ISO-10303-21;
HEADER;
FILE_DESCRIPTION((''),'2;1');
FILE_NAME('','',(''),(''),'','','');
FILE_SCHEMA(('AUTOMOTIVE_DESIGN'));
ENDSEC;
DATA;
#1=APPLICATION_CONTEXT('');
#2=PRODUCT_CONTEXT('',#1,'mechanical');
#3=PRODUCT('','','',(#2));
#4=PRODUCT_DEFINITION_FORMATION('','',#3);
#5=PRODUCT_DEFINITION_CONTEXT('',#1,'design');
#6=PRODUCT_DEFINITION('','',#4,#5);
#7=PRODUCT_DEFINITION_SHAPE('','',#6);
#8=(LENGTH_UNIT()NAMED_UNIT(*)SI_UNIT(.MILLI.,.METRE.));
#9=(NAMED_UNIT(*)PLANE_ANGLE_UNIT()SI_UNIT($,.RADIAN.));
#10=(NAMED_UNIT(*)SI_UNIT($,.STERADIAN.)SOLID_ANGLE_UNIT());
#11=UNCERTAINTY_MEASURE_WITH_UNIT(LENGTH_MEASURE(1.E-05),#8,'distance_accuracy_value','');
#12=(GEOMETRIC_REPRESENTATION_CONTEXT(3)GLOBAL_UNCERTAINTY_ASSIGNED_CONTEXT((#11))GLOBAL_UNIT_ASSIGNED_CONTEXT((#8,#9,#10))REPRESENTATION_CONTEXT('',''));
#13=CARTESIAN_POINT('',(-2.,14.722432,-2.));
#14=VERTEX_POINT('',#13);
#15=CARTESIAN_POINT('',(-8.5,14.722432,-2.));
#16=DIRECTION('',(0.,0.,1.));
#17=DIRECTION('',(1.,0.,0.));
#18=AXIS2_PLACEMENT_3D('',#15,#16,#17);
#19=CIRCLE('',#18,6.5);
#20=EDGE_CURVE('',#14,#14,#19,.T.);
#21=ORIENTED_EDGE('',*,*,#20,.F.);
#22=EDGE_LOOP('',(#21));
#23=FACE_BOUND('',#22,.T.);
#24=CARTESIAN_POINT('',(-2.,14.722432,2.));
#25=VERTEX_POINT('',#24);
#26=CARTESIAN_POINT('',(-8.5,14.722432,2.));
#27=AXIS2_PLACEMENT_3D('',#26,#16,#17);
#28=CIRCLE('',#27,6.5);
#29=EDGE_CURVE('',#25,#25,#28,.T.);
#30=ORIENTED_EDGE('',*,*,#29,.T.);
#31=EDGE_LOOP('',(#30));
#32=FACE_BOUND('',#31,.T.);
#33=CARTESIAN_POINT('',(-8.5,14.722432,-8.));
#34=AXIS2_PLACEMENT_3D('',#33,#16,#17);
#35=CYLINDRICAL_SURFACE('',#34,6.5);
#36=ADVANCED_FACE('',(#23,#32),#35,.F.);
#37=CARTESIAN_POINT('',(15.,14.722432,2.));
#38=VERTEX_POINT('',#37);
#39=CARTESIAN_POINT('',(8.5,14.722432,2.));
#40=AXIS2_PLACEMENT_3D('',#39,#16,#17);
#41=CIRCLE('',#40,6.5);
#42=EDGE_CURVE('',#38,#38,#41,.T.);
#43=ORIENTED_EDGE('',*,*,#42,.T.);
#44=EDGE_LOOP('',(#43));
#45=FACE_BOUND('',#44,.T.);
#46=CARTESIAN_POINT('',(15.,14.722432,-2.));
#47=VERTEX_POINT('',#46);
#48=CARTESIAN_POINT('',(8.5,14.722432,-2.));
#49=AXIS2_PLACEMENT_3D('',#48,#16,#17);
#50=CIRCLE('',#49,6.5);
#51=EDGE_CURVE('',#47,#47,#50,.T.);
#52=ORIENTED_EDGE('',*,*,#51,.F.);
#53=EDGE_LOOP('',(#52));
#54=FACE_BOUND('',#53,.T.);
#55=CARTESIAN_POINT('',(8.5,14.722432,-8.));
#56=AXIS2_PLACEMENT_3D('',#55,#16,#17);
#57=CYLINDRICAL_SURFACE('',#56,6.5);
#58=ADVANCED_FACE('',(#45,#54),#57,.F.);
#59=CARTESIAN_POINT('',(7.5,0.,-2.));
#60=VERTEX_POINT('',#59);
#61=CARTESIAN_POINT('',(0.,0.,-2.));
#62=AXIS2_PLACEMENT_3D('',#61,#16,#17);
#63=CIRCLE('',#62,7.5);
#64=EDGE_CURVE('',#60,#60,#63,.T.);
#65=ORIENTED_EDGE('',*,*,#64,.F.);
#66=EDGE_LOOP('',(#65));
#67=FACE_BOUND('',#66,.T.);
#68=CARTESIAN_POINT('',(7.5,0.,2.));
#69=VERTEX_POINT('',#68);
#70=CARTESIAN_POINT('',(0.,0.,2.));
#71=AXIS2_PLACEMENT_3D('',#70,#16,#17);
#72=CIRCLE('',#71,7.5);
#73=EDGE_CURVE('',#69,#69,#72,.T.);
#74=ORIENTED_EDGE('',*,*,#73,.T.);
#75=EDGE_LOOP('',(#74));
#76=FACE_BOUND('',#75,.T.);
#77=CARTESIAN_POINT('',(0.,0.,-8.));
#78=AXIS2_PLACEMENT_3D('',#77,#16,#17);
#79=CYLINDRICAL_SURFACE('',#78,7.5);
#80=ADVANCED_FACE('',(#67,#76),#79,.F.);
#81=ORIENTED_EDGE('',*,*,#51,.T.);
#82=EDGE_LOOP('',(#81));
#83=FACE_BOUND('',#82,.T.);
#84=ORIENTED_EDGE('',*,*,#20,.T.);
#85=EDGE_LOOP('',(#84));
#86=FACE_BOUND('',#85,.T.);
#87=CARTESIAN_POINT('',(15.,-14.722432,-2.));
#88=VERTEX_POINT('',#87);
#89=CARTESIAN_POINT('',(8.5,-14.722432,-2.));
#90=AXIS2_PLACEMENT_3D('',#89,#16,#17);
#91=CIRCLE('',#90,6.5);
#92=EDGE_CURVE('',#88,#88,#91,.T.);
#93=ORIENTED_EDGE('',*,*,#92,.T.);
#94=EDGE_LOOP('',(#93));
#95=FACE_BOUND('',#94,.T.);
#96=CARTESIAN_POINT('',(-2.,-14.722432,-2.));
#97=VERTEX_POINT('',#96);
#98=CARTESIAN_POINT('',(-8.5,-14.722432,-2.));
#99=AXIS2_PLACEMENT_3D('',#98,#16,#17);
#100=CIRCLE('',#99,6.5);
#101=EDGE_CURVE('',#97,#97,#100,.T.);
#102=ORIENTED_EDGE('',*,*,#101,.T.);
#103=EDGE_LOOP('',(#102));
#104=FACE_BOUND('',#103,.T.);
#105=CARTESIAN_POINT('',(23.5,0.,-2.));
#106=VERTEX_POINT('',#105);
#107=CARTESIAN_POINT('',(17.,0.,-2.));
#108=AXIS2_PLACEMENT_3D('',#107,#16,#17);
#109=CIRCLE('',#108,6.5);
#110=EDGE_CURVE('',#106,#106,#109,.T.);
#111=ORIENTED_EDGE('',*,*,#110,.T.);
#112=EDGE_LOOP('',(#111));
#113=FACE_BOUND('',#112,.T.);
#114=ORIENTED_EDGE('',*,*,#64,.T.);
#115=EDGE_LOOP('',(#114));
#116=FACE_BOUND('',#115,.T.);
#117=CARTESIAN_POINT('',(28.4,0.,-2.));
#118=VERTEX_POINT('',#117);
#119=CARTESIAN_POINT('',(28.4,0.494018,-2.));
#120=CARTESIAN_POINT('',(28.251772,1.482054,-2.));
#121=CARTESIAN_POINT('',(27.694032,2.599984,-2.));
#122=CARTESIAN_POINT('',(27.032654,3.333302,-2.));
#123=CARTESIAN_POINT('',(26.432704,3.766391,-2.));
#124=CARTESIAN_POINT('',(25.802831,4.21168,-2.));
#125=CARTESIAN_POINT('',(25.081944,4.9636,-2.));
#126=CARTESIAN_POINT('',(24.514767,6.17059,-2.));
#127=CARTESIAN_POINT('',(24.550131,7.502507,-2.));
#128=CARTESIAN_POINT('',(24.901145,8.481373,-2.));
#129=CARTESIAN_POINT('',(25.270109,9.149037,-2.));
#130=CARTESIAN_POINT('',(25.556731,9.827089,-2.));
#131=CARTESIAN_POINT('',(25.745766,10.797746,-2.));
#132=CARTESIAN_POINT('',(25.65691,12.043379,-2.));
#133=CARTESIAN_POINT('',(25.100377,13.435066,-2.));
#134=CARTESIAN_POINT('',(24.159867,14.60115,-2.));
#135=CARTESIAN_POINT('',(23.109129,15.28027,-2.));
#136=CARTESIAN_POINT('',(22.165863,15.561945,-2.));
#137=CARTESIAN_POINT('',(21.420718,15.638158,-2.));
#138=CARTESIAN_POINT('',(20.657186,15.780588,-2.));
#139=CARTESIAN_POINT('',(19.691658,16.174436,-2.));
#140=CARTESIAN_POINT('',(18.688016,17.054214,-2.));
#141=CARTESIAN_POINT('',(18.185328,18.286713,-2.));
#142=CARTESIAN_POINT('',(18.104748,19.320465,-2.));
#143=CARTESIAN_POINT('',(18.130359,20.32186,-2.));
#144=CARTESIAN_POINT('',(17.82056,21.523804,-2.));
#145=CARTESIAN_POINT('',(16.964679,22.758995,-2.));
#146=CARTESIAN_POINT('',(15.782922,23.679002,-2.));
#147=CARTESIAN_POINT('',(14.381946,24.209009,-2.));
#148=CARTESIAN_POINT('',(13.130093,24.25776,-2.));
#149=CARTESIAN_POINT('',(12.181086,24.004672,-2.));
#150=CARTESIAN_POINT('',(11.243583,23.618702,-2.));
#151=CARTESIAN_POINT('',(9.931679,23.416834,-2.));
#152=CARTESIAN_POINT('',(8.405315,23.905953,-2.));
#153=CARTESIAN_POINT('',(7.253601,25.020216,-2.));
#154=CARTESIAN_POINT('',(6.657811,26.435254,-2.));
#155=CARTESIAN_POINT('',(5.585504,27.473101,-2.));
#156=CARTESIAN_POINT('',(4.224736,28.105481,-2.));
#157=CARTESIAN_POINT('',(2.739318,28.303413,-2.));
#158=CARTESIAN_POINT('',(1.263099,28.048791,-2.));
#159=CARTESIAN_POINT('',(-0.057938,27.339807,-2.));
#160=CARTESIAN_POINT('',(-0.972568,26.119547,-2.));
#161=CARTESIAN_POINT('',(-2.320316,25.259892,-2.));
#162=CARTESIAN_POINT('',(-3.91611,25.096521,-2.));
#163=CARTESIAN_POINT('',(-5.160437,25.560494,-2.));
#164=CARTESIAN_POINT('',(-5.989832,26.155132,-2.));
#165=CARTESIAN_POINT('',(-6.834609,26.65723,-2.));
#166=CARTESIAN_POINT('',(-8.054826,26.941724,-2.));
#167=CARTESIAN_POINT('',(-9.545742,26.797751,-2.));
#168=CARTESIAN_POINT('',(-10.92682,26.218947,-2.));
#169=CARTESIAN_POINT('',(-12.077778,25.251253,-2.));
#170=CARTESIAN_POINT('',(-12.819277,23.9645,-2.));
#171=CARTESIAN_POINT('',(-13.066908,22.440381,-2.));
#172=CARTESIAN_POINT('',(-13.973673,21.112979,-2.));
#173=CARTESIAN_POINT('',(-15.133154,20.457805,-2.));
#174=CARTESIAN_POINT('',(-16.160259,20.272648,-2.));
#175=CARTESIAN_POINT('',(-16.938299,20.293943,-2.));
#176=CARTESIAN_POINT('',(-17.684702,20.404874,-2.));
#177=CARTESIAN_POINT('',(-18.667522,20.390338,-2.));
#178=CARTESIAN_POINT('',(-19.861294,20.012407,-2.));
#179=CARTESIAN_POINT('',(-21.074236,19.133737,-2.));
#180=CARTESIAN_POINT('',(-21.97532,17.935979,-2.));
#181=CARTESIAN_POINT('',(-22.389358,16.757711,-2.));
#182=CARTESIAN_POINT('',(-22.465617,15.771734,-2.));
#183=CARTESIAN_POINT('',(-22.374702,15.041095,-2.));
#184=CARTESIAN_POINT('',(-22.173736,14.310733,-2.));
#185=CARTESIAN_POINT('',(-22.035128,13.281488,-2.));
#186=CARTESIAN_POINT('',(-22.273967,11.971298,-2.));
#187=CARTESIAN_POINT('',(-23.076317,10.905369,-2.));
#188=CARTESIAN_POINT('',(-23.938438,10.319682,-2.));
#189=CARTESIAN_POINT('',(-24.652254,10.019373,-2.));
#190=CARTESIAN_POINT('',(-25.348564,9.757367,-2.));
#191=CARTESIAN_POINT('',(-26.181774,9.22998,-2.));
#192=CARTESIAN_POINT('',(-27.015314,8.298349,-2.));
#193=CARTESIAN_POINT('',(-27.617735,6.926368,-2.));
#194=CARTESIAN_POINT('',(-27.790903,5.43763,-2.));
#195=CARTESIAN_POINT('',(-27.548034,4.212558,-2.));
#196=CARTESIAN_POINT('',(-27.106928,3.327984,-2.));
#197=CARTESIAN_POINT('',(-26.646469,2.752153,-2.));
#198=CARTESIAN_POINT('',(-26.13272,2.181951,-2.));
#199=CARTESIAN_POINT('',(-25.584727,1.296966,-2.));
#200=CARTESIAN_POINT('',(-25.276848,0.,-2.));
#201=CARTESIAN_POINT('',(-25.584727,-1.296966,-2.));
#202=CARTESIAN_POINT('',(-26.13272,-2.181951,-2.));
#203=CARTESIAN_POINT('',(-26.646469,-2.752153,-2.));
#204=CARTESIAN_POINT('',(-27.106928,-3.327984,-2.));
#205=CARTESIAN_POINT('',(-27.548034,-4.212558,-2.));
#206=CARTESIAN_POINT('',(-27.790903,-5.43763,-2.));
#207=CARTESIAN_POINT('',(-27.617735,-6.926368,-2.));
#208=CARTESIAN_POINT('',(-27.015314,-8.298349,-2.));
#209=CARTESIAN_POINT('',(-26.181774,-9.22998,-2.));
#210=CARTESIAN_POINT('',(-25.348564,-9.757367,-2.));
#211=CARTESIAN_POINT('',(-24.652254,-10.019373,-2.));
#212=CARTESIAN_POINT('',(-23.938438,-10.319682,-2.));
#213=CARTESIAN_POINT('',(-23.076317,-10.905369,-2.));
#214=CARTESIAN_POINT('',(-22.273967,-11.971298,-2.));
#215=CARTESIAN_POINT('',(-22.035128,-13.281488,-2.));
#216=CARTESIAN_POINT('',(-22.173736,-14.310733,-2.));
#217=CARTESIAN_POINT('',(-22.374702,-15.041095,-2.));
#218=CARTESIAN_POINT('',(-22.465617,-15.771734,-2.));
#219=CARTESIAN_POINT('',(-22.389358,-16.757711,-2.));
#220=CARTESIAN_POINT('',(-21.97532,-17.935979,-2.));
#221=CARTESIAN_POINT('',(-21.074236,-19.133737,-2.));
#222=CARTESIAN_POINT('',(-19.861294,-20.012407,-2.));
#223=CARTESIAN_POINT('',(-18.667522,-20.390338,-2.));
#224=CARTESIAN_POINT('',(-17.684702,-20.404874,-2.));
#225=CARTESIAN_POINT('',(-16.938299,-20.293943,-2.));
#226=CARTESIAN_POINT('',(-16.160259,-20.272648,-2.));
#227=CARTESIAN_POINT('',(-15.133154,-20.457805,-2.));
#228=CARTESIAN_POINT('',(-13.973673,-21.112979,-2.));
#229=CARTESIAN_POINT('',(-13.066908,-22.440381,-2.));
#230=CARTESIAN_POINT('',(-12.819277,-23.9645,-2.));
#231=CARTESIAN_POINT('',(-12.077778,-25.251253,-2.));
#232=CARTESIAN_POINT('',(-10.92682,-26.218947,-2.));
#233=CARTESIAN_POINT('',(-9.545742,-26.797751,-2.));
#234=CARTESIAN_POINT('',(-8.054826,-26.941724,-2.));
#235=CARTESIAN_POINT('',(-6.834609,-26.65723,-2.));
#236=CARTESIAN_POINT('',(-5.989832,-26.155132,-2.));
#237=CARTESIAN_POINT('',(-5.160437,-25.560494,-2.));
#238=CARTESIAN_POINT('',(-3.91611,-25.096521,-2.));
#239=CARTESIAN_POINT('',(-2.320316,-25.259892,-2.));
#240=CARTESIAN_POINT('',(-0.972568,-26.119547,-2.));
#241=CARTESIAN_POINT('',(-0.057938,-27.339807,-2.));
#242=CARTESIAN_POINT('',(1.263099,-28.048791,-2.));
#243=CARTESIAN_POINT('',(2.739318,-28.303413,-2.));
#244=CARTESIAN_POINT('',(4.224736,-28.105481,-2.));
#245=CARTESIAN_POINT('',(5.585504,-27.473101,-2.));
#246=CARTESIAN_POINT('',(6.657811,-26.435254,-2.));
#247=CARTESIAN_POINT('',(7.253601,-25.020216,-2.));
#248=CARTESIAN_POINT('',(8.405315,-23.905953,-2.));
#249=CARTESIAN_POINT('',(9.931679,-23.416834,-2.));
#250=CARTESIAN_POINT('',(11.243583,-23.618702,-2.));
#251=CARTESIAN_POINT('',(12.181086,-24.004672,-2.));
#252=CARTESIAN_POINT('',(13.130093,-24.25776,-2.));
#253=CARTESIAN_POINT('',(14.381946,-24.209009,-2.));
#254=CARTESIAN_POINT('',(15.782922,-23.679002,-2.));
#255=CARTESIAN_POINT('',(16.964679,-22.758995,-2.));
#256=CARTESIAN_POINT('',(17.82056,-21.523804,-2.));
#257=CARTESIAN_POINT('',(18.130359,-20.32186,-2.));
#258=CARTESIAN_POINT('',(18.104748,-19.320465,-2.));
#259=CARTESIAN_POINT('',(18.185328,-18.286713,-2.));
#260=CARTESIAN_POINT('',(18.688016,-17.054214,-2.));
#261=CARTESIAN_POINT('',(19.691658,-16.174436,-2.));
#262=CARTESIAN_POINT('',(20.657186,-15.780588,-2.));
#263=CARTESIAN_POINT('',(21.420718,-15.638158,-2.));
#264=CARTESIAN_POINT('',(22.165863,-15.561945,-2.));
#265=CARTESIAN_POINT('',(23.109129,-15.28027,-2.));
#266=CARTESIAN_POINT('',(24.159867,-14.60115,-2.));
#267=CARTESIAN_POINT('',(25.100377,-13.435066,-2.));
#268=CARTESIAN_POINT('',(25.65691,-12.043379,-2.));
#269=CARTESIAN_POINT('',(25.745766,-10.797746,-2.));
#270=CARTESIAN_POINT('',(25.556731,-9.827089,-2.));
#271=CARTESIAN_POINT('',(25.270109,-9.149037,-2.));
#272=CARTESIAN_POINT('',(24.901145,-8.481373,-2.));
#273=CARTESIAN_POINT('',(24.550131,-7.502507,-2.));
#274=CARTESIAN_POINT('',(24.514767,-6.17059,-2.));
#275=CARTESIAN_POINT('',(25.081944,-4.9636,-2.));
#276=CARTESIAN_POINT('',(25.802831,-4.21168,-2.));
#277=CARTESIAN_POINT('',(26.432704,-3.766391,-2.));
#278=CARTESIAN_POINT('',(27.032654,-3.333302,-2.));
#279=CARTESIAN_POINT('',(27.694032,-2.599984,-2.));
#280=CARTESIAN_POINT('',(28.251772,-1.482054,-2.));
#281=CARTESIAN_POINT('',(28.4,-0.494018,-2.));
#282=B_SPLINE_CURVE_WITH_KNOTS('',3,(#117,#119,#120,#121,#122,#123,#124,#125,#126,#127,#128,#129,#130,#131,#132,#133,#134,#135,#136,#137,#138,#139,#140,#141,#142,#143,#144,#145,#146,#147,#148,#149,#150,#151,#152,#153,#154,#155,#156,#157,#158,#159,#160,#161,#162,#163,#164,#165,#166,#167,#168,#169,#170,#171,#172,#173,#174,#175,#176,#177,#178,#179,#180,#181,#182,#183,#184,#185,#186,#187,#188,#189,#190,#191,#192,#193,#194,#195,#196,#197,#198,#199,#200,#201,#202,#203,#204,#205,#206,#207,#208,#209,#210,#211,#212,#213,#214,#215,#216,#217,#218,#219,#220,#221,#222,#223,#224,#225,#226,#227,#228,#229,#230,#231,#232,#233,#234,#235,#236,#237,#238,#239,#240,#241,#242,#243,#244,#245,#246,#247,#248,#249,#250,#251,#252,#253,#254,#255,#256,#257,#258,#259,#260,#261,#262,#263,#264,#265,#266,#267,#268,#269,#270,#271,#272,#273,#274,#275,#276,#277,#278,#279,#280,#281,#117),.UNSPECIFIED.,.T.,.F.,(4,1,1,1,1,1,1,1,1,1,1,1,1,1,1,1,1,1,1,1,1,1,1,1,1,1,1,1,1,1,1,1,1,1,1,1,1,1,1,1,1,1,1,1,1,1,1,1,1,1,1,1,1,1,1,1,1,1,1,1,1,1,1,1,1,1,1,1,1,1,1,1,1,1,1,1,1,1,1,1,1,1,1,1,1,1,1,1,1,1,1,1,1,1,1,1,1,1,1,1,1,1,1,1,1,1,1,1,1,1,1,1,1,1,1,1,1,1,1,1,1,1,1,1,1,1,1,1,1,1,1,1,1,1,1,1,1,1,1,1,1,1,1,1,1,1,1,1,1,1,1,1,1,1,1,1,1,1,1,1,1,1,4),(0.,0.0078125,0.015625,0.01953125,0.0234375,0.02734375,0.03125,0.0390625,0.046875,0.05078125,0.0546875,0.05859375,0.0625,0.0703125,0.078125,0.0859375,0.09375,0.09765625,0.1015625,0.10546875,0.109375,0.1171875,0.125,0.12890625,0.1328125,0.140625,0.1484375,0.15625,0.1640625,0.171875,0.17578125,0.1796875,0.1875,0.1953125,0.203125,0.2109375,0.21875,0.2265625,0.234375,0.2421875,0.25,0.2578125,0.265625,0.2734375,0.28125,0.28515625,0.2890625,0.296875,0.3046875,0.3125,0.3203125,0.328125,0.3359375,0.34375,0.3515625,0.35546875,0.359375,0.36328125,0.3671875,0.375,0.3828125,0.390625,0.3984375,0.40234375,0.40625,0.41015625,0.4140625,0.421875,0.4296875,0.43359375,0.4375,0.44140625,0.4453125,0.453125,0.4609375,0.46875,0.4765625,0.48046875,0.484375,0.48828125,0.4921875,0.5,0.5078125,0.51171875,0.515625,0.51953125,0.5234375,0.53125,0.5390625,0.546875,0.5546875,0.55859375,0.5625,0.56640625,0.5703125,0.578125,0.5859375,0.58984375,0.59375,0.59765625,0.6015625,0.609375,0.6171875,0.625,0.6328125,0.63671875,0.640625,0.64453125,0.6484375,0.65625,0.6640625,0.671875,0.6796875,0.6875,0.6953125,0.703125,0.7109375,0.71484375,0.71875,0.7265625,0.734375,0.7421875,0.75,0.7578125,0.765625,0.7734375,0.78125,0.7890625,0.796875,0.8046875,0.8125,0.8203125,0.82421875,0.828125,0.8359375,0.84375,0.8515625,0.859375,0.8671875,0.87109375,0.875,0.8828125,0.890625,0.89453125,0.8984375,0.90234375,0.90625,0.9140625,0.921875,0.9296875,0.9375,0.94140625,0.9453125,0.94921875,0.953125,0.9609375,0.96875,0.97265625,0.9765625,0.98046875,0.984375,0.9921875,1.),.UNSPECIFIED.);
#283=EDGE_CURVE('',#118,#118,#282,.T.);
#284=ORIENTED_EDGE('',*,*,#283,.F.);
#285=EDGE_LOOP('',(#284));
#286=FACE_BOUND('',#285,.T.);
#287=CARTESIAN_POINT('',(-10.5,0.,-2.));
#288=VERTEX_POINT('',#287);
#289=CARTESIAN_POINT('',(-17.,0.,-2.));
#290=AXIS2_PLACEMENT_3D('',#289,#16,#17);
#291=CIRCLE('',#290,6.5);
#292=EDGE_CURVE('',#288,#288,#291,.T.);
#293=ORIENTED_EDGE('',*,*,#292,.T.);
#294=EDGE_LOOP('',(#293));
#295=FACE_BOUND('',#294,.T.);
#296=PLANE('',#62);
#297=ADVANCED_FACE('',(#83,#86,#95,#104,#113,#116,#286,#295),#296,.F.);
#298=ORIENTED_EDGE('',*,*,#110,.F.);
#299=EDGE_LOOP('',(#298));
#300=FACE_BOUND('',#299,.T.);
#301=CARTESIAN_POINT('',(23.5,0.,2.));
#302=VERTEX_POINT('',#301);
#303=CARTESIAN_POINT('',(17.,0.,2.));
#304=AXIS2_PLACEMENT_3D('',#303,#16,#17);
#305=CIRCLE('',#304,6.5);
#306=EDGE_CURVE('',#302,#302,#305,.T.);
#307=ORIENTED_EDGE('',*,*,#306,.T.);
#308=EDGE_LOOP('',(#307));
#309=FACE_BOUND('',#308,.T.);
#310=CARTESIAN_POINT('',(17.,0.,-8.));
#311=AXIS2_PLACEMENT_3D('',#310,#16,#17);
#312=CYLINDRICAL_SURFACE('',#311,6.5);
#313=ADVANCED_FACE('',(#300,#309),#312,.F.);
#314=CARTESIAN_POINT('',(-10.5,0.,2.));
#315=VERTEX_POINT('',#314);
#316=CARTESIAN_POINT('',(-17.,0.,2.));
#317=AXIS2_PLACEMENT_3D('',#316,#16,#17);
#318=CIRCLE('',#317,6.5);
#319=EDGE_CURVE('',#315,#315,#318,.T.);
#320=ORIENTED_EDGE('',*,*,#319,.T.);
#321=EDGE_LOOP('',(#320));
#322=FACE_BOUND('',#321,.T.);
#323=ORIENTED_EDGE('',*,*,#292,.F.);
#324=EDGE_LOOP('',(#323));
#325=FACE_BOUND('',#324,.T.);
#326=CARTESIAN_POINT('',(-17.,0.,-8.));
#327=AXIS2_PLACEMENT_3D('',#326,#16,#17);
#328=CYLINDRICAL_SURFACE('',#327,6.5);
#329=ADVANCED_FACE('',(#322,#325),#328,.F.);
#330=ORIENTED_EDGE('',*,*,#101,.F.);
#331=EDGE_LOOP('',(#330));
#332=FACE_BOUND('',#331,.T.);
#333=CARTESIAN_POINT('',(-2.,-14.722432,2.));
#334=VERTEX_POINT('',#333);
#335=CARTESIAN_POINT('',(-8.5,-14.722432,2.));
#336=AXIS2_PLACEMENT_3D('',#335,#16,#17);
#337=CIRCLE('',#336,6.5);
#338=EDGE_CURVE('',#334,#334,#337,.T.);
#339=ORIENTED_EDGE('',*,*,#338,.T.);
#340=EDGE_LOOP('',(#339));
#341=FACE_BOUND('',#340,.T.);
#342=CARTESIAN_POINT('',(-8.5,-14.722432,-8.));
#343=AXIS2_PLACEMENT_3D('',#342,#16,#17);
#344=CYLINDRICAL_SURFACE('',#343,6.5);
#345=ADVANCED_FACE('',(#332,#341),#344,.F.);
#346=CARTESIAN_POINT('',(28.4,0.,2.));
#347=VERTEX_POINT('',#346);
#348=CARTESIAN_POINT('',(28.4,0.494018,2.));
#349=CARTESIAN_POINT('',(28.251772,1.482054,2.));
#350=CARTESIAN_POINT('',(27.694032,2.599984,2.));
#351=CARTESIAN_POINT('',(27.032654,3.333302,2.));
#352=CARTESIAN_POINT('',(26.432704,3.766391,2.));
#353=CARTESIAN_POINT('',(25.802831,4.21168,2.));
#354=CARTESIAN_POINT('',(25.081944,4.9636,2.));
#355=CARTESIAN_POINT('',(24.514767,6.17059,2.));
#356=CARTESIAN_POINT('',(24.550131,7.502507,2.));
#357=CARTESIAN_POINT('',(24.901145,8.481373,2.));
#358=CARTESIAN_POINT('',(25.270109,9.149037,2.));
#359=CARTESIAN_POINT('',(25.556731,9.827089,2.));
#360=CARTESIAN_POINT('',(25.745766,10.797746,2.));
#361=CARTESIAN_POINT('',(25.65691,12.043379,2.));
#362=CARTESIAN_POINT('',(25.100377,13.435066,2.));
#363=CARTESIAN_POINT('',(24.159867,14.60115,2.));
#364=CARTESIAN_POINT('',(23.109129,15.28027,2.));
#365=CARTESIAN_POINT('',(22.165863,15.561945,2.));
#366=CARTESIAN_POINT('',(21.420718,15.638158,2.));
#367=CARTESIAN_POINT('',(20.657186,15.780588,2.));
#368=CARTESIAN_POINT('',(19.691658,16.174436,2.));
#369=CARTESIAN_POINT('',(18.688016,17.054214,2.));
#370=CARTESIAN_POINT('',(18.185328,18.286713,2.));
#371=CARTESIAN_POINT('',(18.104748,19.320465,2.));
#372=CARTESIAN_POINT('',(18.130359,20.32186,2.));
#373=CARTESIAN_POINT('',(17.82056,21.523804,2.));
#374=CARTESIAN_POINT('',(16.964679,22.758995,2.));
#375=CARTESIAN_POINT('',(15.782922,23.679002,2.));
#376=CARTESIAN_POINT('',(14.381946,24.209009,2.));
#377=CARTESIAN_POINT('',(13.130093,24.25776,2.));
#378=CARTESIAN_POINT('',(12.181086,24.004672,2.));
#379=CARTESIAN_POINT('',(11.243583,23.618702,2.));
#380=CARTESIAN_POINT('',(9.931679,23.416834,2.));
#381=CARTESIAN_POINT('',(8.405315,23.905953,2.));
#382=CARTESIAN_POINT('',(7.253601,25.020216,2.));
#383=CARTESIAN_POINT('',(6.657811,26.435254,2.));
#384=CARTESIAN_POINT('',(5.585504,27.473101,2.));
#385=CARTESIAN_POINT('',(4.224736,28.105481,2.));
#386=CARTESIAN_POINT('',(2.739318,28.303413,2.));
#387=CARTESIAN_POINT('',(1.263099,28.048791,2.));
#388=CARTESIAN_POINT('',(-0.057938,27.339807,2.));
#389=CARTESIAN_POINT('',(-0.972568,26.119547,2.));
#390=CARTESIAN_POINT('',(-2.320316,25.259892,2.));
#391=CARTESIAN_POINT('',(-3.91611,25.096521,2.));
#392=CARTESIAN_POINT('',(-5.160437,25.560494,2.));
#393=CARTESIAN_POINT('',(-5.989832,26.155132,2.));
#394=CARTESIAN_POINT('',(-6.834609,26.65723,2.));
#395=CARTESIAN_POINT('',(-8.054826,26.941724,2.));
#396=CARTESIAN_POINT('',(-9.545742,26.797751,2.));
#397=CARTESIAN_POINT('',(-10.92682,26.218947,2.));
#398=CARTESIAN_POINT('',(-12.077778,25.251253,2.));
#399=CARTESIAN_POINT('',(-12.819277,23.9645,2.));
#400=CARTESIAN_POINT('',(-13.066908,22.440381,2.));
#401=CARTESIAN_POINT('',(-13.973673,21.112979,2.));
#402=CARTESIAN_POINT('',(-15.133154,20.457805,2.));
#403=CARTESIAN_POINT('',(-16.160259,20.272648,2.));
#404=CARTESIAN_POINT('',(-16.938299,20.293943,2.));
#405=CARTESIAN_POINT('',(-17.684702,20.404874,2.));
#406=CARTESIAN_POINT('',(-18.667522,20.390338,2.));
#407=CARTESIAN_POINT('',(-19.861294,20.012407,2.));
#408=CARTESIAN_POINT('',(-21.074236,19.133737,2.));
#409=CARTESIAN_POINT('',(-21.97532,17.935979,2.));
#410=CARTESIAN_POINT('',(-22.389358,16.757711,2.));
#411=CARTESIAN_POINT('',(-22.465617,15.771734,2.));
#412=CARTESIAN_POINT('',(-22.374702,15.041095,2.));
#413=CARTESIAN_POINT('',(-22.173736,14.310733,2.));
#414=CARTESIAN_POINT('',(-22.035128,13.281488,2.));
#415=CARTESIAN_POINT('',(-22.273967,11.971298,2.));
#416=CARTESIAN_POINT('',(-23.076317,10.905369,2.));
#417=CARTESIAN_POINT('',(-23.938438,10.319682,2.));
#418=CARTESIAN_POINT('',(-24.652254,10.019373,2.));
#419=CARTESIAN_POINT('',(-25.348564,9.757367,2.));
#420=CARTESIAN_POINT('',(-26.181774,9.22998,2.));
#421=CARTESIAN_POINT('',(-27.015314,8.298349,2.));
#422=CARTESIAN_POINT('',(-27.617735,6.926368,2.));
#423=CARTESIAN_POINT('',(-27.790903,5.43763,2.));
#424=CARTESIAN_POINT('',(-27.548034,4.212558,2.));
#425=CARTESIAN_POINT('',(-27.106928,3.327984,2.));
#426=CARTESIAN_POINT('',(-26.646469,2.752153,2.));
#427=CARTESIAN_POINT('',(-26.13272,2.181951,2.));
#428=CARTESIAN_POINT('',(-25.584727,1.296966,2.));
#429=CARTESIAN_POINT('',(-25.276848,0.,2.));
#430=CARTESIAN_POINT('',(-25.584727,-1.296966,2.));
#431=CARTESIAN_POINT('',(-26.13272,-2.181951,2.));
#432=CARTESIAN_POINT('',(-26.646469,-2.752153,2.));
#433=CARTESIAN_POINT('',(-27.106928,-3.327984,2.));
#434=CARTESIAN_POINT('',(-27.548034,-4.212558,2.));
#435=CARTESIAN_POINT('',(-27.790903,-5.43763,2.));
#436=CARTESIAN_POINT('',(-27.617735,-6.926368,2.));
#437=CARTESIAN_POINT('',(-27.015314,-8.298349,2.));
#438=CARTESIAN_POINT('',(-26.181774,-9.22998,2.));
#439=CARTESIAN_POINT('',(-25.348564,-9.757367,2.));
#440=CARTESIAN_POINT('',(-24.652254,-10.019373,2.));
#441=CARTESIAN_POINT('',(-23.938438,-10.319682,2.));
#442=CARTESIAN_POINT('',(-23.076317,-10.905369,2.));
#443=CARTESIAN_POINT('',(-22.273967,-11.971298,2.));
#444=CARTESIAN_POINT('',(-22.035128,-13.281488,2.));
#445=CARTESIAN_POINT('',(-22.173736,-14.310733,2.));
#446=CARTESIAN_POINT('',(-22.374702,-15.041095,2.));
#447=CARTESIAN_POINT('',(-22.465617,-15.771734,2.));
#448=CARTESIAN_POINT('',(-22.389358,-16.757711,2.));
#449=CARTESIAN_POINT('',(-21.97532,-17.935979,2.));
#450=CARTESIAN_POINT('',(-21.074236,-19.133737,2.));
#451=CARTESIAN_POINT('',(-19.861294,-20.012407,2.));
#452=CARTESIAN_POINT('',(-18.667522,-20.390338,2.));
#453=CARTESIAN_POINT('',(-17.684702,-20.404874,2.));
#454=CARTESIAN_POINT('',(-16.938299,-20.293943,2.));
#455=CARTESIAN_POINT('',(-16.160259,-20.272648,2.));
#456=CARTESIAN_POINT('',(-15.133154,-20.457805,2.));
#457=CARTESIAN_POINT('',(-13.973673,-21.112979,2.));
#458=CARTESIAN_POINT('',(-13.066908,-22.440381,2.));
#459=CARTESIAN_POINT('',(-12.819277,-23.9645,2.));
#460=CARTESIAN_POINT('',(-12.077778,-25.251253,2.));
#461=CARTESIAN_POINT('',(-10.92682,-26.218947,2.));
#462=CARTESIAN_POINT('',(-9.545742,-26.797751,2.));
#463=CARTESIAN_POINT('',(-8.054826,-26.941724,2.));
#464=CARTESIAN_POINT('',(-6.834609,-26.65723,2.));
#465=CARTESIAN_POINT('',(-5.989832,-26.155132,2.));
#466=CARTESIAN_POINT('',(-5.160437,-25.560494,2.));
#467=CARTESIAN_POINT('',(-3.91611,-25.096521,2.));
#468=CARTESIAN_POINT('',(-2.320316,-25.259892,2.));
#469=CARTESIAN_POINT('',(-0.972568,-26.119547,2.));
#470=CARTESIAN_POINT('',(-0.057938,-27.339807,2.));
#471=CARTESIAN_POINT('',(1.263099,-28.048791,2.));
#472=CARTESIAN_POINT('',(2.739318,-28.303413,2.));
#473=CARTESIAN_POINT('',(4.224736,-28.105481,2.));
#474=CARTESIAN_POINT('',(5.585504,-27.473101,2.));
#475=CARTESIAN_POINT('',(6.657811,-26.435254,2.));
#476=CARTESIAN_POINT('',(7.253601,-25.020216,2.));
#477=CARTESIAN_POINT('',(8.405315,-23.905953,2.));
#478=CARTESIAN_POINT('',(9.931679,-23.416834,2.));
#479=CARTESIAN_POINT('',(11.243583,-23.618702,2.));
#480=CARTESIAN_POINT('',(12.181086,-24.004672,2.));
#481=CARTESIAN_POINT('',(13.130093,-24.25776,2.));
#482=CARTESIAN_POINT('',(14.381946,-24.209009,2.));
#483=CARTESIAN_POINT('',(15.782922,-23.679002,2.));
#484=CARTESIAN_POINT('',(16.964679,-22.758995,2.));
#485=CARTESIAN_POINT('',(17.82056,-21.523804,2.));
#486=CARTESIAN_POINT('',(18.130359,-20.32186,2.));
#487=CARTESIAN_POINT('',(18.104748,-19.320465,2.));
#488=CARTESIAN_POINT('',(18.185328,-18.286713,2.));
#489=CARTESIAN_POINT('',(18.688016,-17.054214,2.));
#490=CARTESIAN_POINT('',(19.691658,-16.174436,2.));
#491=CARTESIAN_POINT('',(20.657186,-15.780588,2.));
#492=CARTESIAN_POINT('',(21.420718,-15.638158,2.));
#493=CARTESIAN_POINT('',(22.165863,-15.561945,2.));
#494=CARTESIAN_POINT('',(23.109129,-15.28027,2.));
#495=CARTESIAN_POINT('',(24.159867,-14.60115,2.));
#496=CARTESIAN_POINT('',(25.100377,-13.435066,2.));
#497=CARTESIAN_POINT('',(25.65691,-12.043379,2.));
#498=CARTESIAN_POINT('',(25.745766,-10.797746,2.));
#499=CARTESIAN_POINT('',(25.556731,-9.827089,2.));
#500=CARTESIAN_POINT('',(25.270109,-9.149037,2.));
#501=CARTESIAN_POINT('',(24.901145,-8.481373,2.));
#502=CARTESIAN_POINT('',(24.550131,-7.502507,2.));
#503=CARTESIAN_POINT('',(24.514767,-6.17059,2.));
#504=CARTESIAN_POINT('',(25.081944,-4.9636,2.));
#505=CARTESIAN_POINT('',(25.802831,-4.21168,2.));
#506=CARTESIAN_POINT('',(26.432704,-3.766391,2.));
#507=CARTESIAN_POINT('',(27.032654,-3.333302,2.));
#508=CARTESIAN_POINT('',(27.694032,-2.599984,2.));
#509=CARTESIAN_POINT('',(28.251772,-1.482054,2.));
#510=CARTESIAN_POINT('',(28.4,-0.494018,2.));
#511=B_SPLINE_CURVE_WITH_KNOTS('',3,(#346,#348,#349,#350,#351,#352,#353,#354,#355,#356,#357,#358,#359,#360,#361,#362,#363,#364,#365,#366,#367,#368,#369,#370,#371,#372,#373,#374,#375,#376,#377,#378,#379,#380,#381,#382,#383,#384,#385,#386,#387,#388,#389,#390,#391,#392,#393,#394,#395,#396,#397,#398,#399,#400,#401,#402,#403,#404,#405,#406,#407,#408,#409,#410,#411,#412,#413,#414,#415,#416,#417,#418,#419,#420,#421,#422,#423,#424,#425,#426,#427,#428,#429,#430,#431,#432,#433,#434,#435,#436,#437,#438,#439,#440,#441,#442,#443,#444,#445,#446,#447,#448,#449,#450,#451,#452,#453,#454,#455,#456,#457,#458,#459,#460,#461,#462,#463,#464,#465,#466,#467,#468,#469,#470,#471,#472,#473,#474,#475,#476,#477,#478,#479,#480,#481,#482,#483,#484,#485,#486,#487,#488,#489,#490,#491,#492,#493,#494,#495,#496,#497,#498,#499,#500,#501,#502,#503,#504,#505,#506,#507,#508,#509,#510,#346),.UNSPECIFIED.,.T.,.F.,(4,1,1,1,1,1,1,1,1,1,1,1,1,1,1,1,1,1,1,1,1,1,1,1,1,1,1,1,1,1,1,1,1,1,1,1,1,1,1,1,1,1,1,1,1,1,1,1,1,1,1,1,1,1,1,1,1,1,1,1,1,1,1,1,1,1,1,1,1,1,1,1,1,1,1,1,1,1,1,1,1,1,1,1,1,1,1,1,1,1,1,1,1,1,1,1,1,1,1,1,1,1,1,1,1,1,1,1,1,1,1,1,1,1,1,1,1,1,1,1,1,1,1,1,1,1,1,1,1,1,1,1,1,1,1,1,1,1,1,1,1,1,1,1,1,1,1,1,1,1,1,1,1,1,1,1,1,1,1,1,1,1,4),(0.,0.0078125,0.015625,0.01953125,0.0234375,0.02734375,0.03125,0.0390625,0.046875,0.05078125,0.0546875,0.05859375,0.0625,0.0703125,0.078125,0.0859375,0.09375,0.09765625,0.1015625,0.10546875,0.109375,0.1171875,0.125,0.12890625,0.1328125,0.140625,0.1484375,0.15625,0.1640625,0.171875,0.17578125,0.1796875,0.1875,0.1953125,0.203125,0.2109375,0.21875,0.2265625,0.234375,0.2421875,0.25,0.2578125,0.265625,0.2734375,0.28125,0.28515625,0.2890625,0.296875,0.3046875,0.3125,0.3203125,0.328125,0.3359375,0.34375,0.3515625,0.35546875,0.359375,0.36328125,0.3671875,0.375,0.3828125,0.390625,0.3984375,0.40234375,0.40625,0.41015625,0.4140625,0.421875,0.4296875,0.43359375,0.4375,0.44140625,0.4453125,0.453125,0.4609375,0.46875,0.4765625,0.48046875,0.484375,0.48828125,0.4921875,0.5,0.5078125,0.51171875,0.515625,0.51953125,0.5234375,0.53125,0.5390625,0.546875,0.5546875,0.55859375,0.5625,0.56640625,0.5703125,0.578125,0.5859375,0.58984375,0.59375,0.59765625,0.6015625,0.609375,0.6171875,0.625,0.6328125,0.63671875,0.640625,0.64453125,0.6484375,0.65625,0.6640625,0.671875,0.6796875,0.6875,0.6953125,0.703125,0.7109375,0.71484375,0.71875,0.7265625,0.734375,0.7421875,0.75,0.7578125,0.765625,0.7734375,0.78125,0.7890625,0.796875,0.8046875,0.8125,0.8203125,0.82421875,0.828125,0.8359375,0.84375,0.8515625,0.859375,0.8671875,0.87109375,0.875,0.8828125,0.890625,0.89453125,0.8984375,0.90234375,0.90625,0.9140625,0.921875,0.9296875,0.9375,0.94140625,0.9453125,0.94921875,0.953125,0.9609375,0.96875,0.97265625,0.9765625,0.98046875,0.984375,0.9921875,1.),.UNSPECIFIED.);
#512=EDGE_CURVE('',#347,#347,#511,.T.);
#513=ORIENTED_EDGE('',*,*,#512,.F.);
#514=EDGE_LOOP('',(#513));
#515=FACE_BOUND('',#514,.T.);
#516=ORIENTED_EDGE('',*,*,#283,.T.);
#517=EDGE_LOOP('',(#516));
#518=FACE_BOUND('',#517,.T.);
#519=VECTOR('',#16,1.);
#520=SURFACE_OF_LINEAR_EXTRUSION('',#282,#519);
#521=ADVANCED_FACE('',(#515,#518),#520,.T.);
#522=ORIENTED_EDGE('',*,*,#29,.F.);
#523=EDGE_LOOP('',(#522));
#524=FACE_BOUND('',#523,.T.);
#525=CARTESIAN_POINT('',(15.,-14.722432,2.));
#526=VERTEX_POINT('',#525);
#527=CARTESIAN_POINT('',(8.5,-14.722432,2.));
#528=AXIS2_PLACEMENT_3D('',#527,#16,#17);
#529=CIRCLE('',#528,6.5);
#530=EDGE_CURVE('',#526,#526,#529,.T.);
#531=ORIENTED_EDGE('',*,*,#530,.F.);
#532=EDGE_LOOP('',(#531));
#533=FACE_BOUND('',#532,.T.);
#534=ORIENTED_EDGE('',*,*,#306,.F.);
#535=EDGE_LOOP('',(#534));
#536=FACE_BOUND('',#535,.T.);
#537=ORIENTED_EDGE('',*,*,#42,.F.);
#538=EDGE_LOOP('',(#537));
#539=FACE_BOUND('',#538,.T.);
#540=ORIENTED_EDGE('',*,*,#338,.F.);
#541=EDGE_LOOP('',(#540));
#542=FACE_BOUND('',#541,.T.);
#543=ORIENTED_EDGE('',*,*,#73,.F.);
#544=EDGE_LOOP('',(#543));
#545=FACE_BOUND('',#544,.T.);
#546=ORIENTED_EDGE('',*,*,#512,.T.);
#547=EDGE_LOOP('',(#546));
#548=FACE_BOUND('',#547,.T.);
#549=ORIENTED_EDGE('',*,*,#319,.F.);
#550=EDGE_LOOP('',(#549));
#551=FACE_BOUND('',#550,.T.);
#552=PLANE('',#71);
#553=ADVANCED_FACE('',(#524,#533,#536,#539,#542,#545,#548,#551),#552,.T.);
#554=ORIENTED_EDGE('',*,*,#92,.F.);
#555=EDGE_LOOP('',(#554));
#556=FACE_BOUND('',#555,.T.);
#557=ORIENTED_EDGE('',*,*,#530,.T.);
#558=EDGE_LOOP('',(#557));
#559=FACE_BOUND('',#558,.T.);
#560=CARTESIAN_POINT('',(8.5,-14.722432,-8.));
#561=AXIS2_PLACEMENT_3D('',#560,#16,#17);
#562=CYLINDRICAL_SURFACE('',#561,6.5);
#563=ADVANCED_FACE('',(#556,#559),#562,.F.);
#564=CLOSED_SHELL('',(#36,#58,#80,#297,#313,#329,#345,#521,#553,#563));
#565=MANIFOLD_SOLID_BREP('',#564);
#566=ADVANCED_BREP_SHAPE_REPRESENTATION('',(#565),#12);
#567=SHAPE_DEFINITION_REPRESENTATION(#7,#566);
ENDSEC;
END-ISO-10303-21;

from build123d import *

# Parameters (mm, degrees)
LOBEBASE_START      = -2
LOBEBASE_DEPTH      = 4
SKETCH_4_R          = 6.5
SKETCH_4_R_2        = 7.5
CUT_EXTRUDE_1_DEPTH = 10


# Read off the part's stored shape, not the designer's step: LobeBase
with BuildPart() as part:
    # LobeBase outline → LobeBase (new body)
    with BuildSketch(Plane.XY.offset(LOBEBASE_START)):
        with BuildLine():
            add(Edge.make_bspline(
                [(28.4, 0), (28.4, 0.494018077), (28.251772435, 1.482054232), (27.694032059, 2.599983804), (27.032653734, 3.333302066), (26.432703825, 3.766390916), (25.802830516, 4.211679965), (25.081944424, 4.963600351), (24.514766687, 6.170589709), (24.550130527, 7.502506821), (24.901144936, 8.481373108), (25.270109341, 9.149037365), (25.556731081, 9.827089112), (25.745765726, 10.797746259), (25.65691043, 12.043379291), (25.100377373, 13.435065671), (24.159867223, 14.601149784), (23.109128776, 15.280269529), (22.165863427, 15.561944741), (21.420717562, 15.638157761), (20.657186141, 15.780588452), (19.691658146, 16.174436352), (18.688016097, 17.054214167), (18.185328323, 18.286712616), (18.104748439, 19.320465117), (18.130358645, 20.321859962), (17.820559813, 21.523804087), (16.964678541, 22.758995128), (15.782921941, 23.679001641), (14.381946138, 24.209009237), (13.130092687, 24.257759644), (12.181086349, 24.004671773), (11.243582998, 23.618702055), (9.931679182, 23.416833659), (8.405314684, 23.905953204), (7.2536008, 25.020215675), (6.657810735, 26.435253642), (5.585504118, 27.473100551), (4.224736428, 28.105480782), (2.739318086, 28.303412693), (1.263098617, 28.048791192), (-0.05793845, 27.339807398), (-0.972568049, 26.119547309), (-2.320315646, 25.259891663), (-3.916109803, 25.096521115), (-5.160436508, 25.560494451), (-5.989831508, 26.155132201), (-6.834608516, 26.657229768), (-8.0548258, 26.941724353), (-9.545742396, 26.797751323), (-10.926819539, 26.218946719), (-12.077777514, 25.251253242), (-12.819277233, 23.96449987), (-13.066907598, 22.440381048), (-13.973672788, 21.112979179), (-15.133153709, 20.457804698), (-16.16025852, 20.272648198), (-16.938299495, 20.293943302), (-17.684701504, 20.404873796), (-18.667521729, 20.390337967), (-19.861294248, 20.012406704), (-21.074236319, 19.133736702), (-21.975319935, 17.935979451), (-22.389357573, 16.757710612), (-22.465616637, 15.771733863), (-22.374702495, 15.041095034), (-22.173735892, 14.310733409), (-22.035127514, 13.281488269), (-22.273967408, 11.971298323), (-23.07631703, 10.905369054), (-23.938438373, 10.319681803), (-24.652253604, 10.019372993), (-25.348564351, 9.757367247), (-26.181774487, 9.229980431), (-27.01531372, 8.298348634), (-27.617734805, 6.926368255), (-27.790902885, 5.437630494), (-27.548033858, 4.212558352), (-27.106927803, 3.32798364), (-26.646468892, 2.752153126), (-26.132719989, 2.181950693), (-25.584727304, 1.296966272), (-25.276848464, 0), (-25.584727304, -1.296966272), (-26.132719989, -2.181950693), (-26.646468892, -2.752153126), (-27.106927803, -3.32798364), (-27.548033858, -4.212558352), (-27.790902885, -5.437630494), (-27.617734805, -6.926368255), (-27.01531372, -8.298348634), (-26.181774487, -9.229980431), (-25.348564351, -9.757367247), (-24.652253604, -10.019372993), (-23.938438373, -10.319681803), (-23.07631703, -10.905369054), (-22.273967408, -11.971298323), (-22.035127514, -13.281488269), (-22.173735892, -14.310733409), (-22.374702495, -15.041095034), (-22.465616637, -15.771733863), (-22.389357573, -16.757710612), (-21.975319935, -17.935979451), (-21.074236319, -19.133736702), (-19.861294248, -20.012406704), (-18.667521729, -20.390337967), (-17.684701504, -20.404873796), (-16.938299495, -20.293943302), (-16.16025852, -20.272648198), (-15.133153709, -20.457804698), (-13.973672788, -21.112979179), (-13.066907598, -22.440381048), (-12.819277233, -23.96449987), (-12.077777514, -25.251253242), (-10.926819539, -26.218946719), (-9.545742396, -26.797751323), (-8.0548258, -26.941724353), (-6.834608516, -26.657229768), (-5.989831508, -26.155132201), (-5.160436508, -25.560494451), (-3.916109803, -25.096521115), (-2.320315646, -25.259891663), (-0.972568049, -26.119547309), (-0.05793845, -27.339807398), (1.263098617, -28.048791192), (2.739318086, -28.303412693), (4.224736428, -28.105480782), (5.585504118, -27.473100551), (6.657810735, -26.435253642), (7.2536008, -25.020215675), (8.405314684, -23.905953204), (9.931679182, -23.416833659), (11.243582998, -23.618702055), (12.181086349, -24.004671773), (13.130092687, -24.257759644), (14.381946138, -24.209009237), (15.782921941, -23.679001641), (16.964678541, -22.758995128), (17.820559813, -21.523804087), (18.130358645, -20.321859962), (18.104748439, -19.320465117), (18.185328323, -18.286712616), (18.688016097, -17.054214167), (19.691658146, -16.174436352), (20.657186141, -15.780588452), (21.420717562, -15.638157761), (22.165863427, -15.561944741), (23.109128776, -15.280269529), (24.159867223, -14.601149784), (25.100377373, -13.435065671), (25.65691043, -12.043379291), (25.745765726, -10.797746259), (25.556731081, -9.827089112), (25.270109341, -9.149037365), (24.901144936, -8.481373108), (24.550130527, -7.502506821), (24.514766687, -6.170589709), (25.081944424, -4.963600351), (25.802830516, -4.211679965), (26.432703825, -3.766390916), (27.032653734, -3.333302066), (27.694032059, -2.599983804), (28.251772435, -1.482054232), (28.4, -0.494018077), (28.4, 0)],
                knots=[0, 0, 0, 0, 0.0078125, 0.015625, 0.01953125, 0.0234375, 0.02734375, 0.03125, 0.0390625, 0.046875, 0.05078125, 0.0546875, 0.05859375, 0.0625, 0.0703125, 0.078125, 0.0859375, 0.09375, 0.09765625, 0.1015625, 0.10546875, 0.109375, 0.1171875, 0.125, 0.12890625, 0.1328125, 0.140625, 0.1484375, 0.15625, 0.1640625, 0.171875, 0.17578125, 0.1796875, 0.1875, 0.1953125, 0.203125, 0.2109375, 0.21875, 0.2265625, 0.234375, 0.2421875, 0.25, 0.2578125, 0.265625, 0.2734375, 0.28125, 0.28515625, 0.2890625, 0.296875, 0.3046875, 0.3125, 0.3203125, 0.328125, 0.3359375, 0.34375, 0.3515625, 0.35546875, 0.359375, 0.36328125, 0.3671875, 0.375, 0.3828125, 0.390625, 0.3984375, 0.40234375, 0.40625, 0.41015625, 0.4140625, 0.421875, 0.4296875, 0.43359375, 0.4375, 0.44140625, 0.4453125, 0.453125, 0.4609375, 0.46875, 0.4765625, 0.48046875, 0.484375, 0.48828125, 0.4921875, 0.5, 0.5078125, 0.51171875, 0.515625, 0.51953125, 0.5234375, 0.53125, 0.5390625, 0.546875, 0.5546875, 0.55859375, 0.5625, 0.56640625, 0.5703125, 0.578125, 0.5859375, 0.58984375, 0.59375, 0.59765625, 0.6015625, 0.609375, 0.6171875, 0.625, 0.6328125, 0.63671875, 0.640625, 0.64453125, 0.6484375, 0.65625, 0.6640625, 0.671875, 0.6796875, 0.6875, 0.6953125, 0.703125, 0.7109375, 0.71484375, 0.71875, 0.7265625, 0.734375, 0.7421875, 0.75, 0.7578125, 0.765625, 0.7734375, 0.78125, 0.7890625, 0.796875, 0.8046875, 0.8125, 0.8203125, 0.82421875, 0.828125, 0.8359375, 0.84375, 0.8515625, 0.859375, 0.8671875, 0.87109375, 0.875, 0.8828125, 0.890625, 0.89453125, 0.8984375, 0.90234375, 0.90625, 0.9140625, 0.921875, 0.9296875, 0.9375, 0.94140625, 0.9453125, 0.94921875, 0.953125, 0.9609375, 0.96875, 0.97265625, 0.9765625, 0.98046875, 0.984375, 0.9921875, 1, 1, 1, 1], degree=3))
        make_face()
    extrude(amount=LOBEBASE_DEPTH)

    # 草图4 → 切除-拉伸1 (cut)
    with BuildSketch(Plane.XY.offset(2)):
        with Locations((17, 0)):
            Circle(SKETCH_4_R)
        with Locations((8.5, -14.722431864)):
            Circle(SKETCH_4_R)
        with Locations((-8.5, -14.722431864)):
            Circle(SKETCH_4_R)
        with Locations((-17, 0)):
            Circle(SKETCH_4_R)
        with Locations((-8.5, 14.722431864)):
            Circle(SKETCH_4_R)
        with Locations((8.5, 14.722431864)):
            Circle(SKETCH_4_R)
        Circle(SKETCH_4_R_2)
    extrude(amount=-CUT_EXTRUDE_1_DEPTH, mode=Mode.SUBTRACT)


solid = part.part
